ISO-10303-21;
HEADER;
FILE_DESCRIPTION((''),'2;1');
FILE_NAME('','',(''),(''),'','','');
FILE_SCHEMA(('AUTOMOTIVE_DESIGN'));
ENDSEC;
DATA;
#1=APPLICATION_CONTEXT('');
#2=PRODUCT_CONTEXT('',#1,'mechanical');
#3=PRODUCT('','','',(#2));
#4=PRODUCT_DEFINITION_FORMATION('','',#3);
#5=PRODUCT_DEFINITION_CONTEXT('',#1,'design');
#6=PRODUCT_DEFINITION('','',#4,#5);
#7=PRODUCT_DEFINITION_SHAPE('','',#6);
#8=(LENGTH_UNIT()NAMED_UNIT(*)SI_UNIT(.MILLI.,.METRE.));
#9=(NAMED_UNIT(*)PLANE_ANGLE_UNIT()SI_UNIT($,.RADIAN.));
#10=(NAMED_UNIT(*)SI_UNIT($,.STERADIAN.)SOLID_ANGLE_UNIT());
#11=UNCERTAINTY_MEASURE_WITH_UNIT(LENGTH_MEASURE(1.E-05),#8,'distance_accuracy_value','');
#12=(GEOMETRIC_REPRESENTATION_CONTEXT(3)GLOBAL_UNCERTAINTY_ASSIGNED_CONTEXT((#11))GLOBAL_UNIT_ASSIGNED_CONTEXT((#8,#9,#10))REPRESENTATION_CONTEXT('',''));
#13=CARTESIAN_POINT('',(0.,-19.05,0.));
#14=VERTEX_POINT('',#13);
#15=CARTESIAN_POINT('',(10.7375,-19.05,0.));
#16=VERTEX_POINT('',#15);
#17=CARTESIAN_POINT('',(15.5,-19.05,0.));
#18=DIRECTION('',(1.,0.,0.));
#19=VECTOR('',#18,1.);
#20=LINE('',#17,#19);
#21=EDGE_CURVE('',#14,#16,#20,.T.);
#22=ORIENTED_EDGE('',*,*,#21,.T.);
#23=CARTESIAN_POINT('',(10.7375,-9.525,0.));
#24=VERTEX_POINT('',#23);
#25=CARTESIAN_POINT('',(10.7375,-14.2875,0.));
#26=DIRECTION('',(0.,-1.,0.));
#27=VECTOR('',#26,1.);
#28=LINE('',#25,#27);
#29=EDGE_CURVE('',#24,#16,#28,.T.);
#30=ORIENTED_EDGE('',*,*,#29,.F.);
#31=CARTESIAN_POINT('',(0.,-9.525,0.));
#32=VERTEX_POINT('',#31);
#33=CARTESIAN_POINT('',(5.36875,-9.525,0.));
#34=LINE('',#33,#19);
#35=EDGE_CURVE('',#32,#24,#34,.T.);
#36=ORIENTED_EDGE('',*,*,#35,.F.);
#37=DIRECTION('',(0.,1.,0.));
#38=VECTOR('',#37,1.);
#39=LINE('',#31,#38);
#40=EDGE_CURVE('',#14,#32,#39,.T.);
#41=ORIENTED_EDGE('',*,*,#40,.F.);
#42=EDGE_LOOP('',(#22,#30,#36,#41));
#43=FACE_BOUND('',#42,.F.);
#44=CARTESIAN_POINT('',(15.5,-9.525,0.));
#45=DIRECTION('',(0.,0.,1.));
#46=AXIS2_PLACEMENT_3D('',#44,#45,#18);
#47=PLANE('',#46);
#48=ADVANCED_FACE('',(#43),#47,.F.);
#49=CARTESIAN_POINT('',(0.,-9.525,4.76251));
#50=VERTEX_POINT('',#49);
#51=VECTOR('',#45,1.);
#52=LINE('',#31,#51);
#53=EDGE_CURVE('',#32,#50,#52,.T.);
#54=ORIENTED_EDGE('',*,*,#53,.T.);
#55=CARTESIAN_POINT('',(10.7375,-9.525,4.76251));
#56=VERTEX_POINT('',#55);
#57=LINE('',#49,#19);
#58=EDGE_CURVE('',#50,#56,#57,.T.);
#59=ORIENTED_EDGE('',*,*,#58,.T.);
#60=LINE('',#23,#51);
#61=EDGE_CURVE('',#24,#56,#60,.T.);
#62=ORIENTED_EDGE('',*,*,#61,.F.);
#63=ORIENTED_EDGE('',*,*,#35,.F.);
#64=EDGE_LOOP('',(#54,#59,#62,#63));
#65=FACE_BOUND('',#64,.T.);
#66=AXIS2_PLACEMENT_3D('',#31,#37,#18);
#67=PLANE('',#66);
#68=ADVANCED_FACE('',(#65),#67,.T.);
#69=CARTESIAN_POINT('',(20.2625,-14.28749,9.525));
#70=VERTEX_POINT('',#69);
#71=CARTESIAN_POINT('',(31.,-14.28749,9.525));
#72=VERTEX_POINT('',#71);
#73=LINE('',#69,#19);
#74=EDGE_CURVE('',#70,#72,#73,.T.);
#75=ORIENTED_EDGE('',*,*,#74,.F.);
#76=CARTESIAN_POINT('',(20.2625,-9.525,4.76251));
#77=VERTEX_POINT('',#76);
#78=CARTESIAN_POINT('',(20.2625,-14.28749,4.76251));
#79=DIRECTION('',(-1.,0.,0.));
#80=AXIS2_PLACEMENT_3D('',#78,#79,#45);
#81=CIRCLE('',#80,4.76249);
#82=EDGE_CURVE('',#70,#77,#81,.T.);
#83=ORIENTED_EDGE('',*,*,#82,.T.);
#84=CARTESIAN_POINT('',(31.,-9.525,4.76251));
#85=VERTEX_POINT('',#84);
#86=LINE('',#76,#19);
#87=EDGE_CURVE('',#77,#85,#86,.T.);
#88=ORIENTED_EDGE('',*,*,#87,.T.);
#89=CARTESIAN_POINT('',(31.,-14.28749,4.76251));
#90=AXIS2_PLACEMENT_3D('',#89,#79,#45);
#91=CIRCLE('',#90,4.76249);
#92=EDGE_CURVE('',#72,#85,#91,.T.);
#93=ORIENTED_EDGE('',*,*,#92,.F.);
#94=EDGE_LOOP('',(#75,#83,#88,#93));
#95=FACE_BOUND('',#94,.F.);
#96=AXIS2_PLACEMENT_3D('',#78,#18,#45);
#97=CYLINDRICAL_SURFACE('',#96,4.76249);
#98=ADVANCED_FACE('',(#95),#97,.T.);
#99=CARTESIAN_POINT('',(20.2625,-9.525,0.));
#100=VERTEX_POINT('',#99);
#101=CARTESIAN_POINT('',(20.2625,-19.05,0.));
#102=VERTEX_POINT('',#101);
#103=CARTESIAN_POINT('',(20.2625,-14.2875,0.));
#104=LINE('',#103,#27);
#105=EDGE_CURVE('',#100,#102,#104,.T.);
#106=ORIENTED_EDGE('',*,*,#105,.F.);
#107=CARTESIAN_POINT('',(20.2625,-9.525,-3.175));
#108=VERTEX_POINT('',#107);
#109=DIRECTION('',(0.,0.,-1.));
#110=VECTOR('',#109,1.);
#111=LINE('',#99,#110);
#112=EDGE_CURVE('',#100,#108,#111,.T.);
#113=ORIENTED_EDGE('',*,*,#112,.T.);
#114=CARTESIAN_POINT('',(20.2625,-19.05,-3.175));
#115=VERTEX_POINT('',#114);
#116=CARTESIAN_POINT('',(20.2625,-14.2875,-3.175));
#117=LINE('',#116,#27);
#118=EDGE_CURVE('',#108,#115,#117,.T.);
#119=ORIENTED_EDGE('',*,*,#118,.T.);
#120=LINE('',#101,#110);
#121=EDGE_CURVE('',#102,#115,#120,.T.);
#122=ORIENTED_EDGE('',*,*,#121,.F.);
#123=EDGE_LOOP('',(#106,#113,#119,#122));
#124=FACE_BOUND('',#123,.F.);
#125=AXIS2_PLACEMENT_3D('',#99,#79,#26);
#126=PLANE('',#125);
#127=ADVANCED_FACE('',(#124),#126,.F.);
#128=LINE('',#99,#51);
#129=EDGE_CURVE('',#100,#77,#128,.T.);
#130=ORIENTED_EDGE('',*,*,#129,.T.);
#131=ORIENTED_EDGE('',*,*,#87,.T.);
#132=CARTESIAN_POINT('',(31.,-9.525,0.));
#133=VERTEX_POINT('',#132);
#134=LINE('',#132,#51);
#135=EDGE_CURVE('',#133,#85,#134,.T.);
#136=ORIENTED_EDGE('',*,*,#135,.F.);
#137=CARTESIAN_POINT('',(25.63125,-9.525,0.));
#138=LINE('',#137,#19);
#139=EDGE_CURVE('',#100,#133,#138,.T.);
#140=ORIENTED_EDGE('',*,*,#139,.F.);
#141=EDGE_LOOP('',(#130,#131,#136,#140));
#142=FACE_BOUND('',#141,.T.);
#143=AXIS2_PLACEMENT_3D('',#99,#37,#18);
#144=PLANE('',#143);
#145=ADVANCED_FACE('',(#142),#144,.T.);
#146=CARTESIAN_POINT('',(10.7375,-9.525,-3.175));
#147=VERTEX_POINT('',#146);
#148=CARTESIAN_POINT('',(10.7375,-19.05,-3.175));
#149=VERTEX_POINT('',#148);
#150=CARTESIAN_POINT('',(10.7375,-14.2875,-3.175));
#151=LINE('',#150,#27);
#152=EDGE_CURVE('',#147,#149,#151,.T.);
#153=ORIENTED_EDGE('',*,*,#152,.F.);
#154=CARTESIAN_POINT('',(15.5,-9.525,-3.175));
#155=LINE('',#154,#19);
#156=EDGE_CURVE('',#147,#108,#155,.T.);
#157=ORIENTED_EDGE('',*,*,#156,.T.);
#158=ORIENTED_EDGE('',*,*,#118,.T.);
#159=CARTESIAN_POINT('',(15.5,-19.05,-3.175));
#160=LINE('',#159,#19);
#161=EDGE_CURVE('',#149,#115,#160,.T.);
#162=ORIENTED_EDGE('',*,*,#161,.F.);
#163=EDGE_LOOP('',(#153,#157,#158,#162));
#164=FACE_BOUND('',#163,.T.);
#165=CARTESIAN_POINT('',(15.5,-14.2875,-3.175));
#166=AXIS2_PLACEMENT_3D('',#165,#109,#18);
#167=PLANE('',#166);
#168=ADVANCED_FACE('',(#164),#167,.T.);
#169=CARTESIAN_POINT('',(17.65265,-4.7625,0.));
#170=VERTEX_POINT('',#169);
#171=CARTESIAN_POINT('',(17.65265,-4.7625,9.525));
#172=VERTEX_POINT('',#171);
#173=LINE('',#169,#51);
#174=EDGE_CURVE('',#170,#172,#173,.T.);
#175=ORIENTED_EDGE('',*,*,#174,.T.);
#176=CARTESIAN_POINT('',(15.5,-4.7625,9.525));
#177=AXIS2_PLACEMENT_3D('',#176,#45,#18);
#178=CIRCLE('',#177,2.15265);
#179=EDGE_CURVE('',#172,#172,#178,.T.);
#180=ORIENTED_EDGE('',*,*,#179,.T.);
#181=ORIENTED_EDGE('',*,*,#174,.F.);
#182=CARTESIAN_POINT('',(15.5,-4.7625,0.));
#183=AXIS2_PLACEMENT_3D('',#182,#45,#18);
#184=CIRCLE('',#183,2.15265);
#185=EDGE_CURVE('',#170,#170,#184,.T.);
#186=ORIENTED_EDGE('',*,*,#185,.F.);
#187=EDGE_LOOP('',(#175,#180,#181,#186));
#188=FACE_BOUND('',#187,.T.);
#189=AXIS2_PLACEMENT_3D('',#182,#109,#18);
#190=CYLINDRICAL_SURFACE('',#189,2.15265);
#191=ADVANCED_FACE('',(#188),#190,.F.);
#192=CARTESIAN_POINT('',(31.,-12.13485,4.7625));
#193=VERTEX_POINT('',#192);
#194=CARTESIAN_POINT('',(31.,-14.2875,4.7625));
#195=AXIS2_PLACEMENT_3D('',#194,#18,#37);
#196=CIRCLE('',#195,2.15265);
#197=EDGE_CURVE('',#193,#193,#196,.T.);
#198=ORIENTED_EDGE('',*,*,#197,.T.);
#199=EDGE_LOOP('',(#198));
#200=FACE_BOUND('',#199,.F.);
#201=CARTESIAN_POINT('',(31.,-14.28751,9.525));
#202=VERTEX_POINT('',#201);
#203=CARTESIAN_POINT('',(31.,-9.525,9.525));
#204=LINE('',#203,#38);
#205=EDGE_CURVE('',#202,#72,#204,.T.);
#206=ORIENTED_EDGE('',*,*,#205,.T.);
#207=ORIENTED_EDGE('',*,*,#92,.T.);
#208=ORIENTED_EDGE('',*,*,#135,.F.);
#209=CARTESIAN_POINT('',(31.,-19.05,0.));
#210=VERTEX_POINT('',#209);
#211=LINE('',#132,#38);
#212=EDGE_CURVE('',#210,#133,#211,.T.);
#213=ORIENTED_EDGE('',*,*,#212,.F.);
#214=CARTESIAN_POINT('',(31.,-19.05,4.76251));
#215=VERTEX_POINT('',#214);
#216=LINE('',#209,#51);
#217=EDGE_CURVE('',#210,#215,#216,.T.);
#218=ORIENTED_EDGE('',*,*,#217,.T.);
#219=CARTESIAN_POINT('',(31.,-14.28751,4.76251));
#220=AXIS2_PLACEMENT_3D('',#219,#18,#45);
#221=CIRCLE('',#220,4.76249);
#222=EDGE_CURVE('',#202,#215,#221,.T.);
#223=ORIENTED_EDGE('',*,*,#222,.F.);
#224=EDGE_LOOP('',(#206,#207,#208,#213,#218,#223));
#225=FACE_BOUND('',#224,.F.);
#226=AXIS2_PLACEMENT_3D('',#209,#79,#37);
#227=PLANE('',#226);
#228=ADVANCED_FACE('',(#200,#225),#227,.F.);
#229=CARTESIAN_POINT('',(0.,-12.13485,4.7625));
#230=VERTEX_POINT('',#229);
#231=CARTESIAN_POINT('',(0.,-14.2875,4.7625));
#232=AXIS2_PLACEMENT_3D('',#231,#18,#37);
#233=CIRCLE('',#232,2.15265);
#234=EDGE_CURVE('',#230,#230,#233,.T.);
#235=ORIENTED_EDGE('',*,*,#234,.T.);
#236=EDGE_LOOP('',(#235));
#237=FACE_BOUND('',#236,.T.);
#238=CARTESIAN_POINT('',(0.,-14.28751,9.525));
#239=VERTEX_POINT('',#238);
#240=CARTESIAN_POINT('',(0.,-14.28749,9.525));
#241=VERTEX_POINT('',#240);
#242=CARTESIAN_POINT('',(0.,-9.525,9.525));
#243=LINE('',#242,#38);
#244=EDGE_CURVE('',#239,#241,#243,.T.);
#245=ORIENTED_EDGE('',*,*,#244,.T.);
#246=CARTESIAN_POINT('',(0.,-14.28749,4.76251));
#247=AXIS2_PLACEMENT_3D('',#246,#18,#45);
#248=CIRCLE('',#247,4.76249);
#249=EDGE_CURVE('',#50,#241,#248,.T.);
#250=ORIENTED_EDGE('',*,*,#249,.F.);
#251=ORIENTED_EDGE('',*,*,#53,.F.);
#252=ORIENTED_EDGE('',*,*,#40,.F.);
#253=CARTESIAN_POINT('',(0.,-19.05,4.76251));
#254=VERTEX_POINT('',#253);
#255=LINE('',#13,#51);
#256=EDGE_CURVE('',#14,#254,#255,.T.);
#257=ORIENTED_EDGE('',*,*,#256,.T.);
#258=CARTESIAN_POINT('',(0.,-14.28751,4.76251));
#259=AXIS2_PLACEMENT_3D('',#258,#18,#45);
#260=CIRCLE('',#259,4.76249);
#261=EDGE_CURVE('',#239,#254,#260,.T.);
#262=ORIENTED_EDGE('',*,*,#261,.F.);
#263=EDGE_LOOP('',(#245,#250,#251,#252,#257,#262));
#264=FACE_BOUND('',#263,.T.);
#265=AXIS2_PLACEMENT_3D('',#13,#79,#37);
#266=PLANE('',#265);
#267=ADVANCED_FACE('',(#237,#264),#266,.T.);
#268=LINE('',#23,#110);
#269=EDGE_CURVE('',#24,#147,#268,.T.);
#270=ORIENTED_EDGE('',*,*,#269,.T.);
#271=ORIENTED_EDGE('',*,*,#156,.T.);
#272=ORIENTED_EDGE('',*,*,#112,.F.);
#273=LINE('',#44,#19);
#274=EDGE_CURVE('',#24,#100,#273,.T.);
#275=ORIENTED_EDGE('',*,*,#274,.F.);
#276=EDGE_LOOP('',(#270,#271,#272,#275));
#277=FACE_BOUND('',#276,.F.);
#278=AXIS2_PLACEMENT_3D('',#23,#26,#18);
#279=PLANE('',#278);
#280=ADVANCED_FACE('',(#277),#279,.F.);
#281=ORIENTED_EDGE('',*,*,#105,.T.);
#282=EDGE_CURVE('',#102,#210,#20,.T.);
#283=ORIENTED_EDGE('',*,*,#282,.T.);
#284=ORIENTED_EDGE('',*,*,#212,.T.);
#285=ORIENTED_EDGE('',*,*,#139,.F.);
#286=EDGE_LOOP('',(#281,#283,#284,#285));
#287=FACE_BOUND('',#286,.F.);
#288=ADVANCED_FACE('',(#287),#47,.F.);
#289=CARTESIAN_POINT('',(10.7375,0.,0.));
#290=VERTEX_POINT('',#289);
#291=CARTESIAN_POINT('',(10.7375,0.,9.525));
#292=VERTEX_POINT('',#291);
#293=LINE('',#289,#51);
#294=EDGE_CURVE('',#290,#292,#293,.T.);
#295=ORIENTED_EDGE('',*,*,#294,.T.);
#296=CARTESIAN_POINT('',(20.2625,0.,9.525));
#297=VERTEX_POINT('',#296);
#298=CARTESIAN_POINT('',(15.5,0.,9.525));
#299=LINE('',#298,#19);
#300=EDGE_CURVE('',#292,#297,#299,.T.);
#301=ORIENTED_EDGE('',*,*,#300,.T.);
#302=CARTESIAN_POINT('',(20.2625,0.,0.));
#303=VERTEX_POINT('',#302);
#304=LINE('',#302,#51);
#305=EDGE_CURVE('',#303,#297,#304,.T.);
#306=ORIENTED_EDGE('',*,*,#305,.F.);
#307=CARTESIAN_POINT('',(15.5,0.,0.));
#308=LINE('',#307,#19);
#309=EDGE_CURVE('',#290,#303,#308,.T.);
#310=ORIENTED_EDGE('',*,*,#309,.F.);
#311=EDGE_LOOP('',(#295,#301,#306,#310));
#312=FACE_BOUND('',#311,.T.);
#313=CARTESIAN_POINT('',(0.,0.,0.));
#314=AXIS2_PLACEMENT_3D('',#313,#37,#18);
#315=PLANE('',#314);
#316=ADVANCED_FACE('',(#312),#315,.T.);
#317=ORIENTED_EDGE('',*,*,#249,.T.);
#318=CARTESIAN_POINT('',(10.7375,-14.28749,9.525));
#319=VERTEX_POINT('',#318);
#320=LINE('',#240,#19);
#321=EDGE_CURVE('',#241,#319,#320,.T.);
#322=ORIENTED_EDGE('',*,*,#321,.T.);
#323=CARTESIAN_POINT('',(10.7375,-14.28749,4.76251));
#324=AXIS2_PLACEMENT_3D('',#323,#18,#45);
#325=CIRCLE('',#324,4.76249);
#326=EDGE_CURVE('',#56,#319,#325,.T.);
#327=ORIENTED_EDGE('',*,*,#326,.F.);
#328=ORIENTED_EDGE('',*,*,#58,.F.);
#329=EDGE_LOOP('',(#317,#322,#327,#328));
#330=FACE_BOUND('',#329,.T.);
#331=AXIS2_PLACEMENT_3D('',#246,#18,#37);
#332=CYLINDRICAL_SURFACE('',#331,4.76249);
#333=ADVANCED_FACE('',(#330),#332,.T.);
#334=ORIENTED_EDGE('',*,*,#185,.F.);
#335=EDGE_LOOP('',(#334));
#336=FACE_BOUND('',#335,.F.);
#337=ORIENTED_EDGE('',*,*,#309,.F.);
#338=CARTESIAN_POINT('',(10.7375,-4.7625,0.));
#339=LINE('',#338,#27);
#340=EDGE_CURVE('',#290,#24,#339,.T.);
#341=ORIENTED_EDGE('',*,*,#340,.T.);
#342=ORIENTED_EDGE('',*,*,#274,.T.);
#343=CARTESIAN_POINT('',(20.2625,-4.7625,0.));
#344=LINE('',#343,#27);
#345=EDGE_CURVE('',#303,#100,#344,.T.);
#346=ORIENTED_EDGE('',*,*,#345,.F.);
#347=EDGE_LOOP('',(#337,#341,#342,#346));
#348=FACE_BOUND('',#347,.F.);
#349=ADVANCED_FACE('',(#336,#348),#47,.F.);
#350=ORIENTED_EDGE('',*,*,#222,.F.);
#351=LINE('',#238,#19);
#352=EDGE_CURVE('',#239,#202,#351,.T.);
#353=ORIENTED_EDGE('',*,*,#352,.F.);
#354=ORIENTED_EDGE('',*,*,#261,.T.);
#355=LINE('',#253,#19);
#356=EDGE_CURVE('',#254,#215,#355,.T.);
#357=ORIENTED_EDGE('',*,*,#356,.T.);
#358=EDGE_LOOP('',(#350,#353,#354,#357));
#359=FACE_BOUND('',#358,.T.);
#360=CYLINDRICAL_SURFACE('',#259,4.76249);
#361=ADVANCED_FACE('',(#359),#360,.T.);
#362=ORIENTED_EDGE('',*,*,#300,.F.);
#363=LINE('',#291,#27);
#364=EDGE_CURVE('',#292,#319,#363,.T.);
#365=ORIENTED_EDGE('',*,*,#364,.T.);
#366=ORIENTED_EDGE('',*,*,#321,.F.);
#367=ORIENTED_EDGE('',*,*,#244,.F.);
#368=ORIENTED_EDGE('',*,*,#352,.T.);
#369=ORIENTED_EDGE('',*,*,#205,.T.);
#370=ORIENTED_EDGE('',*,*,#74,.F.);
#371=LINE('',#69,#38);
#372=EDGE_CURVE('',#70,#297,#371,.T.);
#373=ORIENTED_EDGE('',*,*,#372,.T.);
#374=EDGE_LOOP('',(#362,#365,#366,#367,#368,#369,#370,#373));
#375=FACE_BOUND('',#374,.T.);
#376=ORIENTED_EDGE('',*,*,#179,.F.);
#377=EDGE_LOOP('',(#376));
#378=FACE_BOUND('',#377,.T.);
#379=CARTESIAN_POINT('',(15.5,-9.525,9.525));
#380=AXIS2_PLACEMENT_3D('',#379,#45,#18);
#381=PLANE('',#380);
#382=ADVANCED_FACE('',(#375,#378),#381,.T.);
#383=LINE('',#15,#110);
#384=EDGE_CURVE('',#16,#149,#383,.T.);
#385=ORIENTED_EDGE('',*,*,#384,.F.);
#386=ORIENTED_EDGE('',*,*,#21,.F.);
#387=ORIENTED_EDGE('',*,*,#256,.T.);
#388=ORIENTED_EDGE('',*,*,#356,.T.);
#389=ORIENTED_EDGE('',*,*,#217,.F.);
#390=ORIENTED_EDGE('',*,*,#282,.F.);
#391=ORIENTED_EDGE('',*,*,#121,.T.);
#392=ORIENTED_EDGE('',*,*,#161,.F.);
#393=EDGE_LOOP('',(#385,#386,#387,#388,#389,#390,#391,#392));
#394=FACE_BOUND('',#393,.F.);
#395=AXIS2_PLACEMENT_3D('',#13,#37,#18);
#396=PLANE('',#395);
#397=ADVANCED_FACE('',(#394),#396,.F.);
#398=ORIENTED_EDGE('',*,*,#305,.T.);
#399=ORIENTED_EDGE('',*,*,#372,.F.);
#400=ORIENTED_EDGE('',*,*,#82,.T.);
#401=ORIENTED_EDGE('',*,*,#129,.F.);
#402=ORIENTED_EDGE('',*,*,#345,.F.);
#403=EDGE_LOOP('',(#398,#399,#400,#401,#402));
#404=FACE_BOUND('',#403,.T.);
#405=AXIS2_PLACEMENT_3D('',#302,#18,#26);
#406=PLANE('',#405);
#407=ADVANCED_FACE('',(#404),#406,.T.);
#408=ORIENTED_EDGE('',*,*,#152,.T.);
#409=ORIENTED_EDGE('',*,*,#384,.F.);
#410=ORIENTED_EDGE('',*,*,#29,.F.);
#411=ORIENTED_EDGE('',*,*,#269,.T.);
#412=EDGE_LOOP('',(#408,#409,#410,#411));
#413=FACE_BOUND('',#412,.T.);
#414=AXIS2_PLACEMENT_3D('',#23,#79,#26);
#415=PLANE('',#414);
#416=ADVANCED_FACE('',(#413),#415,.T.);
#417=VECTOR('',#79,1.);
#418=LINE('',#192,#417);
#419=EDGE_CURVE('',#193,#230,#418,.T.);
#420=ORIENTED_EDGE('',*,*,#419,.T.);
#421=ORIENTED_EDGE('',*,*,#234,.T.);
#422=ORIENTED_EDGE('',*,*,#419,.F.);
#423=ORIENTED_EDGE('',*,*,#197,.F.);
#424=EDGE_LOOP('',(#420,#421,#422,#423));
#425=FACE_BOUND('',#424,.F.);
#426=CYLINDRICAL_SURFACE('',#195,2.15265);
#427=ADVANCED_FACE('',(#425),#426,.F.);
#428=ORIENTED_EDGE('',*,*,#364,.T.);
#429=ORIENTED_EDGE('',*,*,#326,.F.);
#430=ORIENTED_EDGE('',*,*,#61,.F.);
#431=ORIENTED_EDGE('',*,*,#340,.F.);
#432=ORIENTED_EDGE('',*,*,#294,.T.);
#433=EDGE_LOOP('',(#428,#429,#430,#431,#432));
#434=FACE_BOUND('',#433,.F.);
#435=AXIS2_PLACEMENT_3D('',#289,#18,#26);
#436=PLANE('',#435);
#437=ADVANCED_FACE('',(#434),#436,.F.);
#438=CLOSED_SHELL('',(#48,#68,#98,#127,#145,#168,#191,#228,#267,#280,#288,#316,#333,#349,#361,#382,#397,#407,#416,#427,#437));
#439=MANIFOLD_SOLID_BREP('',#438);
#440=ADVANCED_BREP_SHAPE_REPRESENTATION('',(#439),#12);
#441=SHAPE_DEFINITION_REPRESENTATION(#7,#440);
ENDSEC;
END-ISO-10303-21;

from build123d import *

# Parameters (mm, degrees)
F0_W     = 31
F0_H     = 19.05
F0_R     = 2.15265
F1_DEPTH = 9.525
F2_R     = 2.15265
F3_DEPTH = 31
F4_W     = 9.525
F4_H     = 9.525
F5_DEPTH = 3.175
F6_W     = 10.7375
F6_H     = 9.525
F7_DEPTH = 9.525
F8_R     = 4.76249


# Not quite as in the source:
# - a fillet or chamfer is up to 0.001 mm smaller than in the source, because OpenCascade refuses the exact size


with BuildPart() as f1:
    # F0 (on Top) → F1 (new body)
    with BuildSketch(Plane.XY):
        with Locations((15.5, -9.525)):
            Rectangle(F0_W, F0_H)
        with Locations((15.5, -4.7625)):
            Circle(F0_R, mode=Mode.SUBTRACT)
    extrude(amount=F1_DEPTH)

    # F2 (on face) → F3 (cut, through all)
    with BuildSketch(Plane.YZ.offset(31)):
        with Locations((-14.2875, 4.7625)):
            Circle(F2_R)
    extrude(amount=-F3_DEPTH, mode=Mode.SUBTRACT)

    # F4 (on face) → F5 (join)
    with BuildSketch(Plane(origin=(0, 0, 0), x_dir=(1, 0, 0), z_dir=(0, 0, -1))):
        with Locations((15.5, 14.2875)):
            Rectangle(F4_W, F4_H)
    extrude(amount=F5_DEPTH)

    # F6 (on face) → F7 (cut, through all)
    with BuildSketch(Plane(origin=(0, 0, 0), x_dir=(1, 0, 0), z_dir=(0, 0, -1))):
        with Locations((25.63125, 4.7625)):
            Rectangle(F6_W, F6_H)
        with Locations((5.36875, 4.7625)):
            Rectangle(F6_W, F6_H)
    extrude(amount=-F7_DEPTH, mode=Mode.SUBTRACT)

    # F8 (radius 4.7625 in the source; OpenCascade refuses exactly that, so slightly less here)
    f8_edges = [f1.edges().sort_by_distance(p)[0] for p in [
        (15.5, -19.05, 9.525),
        (25.63125, -9.525, 9.525),
        (5.36875, -9.525, 9.525),
    ]]
    fillet(f8_edges, radius=F8_R)


solid = f1.part
